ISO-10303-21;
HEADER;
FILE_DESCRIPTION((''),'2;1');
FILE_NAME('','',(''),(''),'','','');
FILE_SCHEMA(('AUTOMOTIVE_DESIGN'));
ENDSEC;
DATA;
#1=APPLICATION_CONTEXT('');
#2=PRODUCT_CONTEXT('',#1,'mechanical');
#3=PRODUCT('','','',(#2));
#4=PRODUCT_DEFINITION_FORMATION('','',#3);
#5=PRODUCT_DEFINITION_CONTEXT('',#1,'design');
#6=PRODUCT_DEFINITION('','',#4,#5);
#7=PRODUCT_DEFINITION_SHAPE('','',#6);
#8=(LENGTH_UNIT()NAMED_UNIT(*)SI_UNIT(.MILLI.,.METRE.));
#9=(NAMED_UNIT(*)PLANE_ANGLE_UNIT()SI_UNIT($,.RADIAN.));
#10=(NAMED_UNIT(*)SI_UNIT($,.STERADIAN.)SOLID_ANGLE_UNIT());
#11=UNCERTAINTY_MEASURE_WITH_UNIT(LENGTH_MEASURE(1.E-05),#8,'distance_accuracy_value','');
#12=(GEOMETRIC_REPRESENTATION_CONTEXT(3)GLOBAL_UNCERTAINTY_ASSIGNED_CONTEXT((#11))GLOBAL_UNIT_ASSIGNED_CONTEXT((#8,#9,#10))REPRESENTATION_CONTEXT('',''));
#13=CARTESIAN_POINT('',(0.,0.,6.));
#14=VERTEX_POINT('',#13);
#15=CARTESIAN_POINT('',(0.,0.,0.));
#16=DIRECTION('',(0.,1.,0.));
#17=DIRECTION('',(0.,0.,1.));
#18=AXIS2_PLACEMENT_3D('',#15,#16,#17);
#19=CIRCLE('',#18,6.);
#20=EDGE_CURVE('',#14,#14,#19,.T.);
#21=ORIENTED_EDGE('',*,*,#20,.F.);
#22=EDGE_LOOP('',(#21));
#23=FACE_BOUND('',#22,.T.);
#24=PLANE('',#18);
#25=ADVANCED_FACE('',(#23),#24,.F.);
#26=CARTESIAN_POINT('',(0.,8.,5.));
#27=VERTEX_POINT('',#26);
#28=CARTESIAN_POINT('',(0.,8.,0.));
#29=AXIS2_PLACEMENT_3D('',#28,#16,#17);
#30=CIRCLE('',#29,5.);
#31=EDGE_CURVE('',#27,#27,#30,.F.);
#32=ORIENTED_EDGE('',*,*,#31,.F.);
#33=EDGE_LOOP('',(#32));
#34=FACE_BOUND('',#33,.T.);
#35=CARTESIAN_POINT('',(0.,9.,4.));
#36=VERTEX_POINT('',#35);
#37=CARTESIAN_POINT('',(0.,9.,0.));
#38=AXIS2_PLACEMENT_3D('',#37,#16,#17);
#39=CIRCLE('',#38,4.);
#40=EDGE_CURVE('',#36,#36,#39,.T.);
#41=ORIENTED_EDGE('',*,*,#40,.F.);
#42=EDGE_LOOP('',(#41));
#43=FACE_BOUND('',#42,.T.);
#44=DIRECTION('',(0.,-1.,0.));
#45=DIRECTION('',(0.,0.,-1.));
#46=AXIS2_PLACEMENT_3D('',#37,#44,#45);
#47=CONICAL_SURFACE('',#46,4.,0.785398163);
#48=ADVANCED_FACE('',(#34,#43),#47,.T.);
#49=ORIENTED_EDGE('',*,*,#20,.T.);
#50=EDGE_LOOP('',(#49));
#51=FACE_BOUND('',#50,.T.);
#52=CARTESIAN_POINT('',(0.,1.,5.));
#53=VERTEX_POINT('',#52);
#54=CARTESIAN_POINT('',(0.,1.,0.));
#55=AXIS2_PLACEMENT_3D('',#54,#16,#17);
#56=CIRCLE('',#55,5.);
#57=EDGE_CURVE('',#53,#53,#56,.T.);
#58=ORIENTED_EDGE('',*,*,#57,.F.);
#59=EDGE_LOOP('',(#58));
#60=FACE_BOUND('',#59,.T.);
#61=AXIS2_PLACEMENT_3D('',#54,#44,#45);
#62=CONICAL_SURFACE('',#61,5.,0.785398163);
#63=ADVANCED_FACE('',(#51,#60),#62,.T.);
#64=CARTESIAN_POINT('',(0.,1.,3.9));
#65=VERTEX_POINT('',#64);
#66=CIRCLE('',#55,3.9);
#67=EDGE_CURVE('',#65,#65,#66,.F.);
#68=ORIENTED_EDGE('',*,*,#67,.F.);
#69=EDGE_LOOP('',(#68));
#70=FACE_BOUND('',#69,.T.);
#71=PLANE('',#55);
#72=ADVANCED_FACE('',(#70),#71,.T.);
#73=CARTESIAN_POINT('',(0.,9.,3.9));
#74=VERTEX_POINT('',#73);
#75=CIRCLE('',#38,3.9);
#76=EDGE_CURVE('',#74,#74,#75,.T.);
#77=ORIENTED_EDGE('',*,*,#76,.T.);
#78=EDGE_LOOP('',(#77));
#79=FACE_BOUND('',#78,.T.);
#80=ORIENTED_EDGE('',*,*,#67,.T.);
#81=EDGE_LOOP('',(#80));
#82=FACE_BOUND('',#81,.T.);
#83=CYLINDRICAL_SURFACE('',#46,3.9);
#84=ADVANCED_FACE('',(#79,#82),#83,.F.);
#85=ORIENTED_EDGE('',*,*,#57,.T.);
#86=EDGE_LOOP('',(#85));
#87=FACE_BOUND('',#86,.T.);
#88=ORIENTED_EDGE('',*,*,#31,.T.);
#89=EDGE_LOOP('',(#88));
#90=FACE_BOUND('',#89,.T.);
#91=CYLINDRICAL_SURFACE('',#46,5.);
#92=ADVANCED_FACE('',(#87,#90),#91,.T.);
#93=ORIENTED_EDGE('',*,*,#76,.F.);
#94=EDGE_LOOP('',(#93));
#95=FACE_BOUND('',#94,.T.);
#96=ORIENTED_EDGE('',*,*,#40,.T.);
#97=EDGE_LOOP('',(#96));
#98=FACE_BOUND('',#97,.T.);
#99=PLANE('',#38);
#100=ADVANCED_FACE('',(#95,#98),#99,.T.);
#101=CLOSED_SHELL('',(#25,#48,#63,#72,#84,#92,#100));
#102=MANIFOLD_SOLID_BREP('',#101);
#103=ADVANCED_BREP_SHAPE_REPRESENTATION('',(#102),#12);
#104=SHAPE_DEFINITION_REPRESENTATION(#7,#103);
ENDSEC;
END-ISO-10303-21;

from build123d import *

# Parameters (mm, degrees)
SKETCH_1_R      = 6
EXTRUDE_1_DEPTH = 1
SKETCH_2_R      = 5
SKETCH_2_R_2    = 3.9
EXTRUDE_2_DEPTH = 8
CHAMFER_1_SIZE  = 1
CHAMFER_2_SIZE  = 1


with BuildPart() as part:
    # Эскиз1 → Бобышка-Вытянуть1 (new body)
    with BuildSketch(Plane(origin=(0, 0, 0), x_dir=(1, 0, 0), z_dir=(0, 1, 0))):
        with Locations(Location((0, 0, 0), (0, 0, 270))):
            Circle(SKETCH_1_R)
    extrude(amount=EXTRUDE_1_DEPTH)

    # Эскиз2 → Бобышка-Вытянуть2 (add)
    with BuildSketch(Plane(origin=(0, 1, 0), x_dir=(1, 0, 0), z_dir=(0, 1, 0))):
        with Locations(Location((0, 0, 0), (0, 0, 270))):
            Circle(SKETCH_2_R)
        with Locations(Location((0, 0, 0), (0, 0, 270))):
            Circle(SKETCH_2_R_2, mode=Mode.SUBTRACT)
    extrude(amount=EXTRUDE_2_DEPTH)

    # Фаска1
    chamfer_1_edges = [part.edges().sort_by_distance(p)[0] for p in [
        (0, 1, -6),
    ]]
    chamfer(chamfer_1_edges, length=CHAMFER_1_SIZE - 0.0001)  # a hair under: the kernel refuses the full size

    # Фаска2
    chamfer_2_edges = [part.edges().sort_by_distance(p)[0] for p in [
        (0, 9, -5),
    ]]
    chamfer(chamfer_2_edges, length=CHAMFER_2_SIZE)


solid = part.part
